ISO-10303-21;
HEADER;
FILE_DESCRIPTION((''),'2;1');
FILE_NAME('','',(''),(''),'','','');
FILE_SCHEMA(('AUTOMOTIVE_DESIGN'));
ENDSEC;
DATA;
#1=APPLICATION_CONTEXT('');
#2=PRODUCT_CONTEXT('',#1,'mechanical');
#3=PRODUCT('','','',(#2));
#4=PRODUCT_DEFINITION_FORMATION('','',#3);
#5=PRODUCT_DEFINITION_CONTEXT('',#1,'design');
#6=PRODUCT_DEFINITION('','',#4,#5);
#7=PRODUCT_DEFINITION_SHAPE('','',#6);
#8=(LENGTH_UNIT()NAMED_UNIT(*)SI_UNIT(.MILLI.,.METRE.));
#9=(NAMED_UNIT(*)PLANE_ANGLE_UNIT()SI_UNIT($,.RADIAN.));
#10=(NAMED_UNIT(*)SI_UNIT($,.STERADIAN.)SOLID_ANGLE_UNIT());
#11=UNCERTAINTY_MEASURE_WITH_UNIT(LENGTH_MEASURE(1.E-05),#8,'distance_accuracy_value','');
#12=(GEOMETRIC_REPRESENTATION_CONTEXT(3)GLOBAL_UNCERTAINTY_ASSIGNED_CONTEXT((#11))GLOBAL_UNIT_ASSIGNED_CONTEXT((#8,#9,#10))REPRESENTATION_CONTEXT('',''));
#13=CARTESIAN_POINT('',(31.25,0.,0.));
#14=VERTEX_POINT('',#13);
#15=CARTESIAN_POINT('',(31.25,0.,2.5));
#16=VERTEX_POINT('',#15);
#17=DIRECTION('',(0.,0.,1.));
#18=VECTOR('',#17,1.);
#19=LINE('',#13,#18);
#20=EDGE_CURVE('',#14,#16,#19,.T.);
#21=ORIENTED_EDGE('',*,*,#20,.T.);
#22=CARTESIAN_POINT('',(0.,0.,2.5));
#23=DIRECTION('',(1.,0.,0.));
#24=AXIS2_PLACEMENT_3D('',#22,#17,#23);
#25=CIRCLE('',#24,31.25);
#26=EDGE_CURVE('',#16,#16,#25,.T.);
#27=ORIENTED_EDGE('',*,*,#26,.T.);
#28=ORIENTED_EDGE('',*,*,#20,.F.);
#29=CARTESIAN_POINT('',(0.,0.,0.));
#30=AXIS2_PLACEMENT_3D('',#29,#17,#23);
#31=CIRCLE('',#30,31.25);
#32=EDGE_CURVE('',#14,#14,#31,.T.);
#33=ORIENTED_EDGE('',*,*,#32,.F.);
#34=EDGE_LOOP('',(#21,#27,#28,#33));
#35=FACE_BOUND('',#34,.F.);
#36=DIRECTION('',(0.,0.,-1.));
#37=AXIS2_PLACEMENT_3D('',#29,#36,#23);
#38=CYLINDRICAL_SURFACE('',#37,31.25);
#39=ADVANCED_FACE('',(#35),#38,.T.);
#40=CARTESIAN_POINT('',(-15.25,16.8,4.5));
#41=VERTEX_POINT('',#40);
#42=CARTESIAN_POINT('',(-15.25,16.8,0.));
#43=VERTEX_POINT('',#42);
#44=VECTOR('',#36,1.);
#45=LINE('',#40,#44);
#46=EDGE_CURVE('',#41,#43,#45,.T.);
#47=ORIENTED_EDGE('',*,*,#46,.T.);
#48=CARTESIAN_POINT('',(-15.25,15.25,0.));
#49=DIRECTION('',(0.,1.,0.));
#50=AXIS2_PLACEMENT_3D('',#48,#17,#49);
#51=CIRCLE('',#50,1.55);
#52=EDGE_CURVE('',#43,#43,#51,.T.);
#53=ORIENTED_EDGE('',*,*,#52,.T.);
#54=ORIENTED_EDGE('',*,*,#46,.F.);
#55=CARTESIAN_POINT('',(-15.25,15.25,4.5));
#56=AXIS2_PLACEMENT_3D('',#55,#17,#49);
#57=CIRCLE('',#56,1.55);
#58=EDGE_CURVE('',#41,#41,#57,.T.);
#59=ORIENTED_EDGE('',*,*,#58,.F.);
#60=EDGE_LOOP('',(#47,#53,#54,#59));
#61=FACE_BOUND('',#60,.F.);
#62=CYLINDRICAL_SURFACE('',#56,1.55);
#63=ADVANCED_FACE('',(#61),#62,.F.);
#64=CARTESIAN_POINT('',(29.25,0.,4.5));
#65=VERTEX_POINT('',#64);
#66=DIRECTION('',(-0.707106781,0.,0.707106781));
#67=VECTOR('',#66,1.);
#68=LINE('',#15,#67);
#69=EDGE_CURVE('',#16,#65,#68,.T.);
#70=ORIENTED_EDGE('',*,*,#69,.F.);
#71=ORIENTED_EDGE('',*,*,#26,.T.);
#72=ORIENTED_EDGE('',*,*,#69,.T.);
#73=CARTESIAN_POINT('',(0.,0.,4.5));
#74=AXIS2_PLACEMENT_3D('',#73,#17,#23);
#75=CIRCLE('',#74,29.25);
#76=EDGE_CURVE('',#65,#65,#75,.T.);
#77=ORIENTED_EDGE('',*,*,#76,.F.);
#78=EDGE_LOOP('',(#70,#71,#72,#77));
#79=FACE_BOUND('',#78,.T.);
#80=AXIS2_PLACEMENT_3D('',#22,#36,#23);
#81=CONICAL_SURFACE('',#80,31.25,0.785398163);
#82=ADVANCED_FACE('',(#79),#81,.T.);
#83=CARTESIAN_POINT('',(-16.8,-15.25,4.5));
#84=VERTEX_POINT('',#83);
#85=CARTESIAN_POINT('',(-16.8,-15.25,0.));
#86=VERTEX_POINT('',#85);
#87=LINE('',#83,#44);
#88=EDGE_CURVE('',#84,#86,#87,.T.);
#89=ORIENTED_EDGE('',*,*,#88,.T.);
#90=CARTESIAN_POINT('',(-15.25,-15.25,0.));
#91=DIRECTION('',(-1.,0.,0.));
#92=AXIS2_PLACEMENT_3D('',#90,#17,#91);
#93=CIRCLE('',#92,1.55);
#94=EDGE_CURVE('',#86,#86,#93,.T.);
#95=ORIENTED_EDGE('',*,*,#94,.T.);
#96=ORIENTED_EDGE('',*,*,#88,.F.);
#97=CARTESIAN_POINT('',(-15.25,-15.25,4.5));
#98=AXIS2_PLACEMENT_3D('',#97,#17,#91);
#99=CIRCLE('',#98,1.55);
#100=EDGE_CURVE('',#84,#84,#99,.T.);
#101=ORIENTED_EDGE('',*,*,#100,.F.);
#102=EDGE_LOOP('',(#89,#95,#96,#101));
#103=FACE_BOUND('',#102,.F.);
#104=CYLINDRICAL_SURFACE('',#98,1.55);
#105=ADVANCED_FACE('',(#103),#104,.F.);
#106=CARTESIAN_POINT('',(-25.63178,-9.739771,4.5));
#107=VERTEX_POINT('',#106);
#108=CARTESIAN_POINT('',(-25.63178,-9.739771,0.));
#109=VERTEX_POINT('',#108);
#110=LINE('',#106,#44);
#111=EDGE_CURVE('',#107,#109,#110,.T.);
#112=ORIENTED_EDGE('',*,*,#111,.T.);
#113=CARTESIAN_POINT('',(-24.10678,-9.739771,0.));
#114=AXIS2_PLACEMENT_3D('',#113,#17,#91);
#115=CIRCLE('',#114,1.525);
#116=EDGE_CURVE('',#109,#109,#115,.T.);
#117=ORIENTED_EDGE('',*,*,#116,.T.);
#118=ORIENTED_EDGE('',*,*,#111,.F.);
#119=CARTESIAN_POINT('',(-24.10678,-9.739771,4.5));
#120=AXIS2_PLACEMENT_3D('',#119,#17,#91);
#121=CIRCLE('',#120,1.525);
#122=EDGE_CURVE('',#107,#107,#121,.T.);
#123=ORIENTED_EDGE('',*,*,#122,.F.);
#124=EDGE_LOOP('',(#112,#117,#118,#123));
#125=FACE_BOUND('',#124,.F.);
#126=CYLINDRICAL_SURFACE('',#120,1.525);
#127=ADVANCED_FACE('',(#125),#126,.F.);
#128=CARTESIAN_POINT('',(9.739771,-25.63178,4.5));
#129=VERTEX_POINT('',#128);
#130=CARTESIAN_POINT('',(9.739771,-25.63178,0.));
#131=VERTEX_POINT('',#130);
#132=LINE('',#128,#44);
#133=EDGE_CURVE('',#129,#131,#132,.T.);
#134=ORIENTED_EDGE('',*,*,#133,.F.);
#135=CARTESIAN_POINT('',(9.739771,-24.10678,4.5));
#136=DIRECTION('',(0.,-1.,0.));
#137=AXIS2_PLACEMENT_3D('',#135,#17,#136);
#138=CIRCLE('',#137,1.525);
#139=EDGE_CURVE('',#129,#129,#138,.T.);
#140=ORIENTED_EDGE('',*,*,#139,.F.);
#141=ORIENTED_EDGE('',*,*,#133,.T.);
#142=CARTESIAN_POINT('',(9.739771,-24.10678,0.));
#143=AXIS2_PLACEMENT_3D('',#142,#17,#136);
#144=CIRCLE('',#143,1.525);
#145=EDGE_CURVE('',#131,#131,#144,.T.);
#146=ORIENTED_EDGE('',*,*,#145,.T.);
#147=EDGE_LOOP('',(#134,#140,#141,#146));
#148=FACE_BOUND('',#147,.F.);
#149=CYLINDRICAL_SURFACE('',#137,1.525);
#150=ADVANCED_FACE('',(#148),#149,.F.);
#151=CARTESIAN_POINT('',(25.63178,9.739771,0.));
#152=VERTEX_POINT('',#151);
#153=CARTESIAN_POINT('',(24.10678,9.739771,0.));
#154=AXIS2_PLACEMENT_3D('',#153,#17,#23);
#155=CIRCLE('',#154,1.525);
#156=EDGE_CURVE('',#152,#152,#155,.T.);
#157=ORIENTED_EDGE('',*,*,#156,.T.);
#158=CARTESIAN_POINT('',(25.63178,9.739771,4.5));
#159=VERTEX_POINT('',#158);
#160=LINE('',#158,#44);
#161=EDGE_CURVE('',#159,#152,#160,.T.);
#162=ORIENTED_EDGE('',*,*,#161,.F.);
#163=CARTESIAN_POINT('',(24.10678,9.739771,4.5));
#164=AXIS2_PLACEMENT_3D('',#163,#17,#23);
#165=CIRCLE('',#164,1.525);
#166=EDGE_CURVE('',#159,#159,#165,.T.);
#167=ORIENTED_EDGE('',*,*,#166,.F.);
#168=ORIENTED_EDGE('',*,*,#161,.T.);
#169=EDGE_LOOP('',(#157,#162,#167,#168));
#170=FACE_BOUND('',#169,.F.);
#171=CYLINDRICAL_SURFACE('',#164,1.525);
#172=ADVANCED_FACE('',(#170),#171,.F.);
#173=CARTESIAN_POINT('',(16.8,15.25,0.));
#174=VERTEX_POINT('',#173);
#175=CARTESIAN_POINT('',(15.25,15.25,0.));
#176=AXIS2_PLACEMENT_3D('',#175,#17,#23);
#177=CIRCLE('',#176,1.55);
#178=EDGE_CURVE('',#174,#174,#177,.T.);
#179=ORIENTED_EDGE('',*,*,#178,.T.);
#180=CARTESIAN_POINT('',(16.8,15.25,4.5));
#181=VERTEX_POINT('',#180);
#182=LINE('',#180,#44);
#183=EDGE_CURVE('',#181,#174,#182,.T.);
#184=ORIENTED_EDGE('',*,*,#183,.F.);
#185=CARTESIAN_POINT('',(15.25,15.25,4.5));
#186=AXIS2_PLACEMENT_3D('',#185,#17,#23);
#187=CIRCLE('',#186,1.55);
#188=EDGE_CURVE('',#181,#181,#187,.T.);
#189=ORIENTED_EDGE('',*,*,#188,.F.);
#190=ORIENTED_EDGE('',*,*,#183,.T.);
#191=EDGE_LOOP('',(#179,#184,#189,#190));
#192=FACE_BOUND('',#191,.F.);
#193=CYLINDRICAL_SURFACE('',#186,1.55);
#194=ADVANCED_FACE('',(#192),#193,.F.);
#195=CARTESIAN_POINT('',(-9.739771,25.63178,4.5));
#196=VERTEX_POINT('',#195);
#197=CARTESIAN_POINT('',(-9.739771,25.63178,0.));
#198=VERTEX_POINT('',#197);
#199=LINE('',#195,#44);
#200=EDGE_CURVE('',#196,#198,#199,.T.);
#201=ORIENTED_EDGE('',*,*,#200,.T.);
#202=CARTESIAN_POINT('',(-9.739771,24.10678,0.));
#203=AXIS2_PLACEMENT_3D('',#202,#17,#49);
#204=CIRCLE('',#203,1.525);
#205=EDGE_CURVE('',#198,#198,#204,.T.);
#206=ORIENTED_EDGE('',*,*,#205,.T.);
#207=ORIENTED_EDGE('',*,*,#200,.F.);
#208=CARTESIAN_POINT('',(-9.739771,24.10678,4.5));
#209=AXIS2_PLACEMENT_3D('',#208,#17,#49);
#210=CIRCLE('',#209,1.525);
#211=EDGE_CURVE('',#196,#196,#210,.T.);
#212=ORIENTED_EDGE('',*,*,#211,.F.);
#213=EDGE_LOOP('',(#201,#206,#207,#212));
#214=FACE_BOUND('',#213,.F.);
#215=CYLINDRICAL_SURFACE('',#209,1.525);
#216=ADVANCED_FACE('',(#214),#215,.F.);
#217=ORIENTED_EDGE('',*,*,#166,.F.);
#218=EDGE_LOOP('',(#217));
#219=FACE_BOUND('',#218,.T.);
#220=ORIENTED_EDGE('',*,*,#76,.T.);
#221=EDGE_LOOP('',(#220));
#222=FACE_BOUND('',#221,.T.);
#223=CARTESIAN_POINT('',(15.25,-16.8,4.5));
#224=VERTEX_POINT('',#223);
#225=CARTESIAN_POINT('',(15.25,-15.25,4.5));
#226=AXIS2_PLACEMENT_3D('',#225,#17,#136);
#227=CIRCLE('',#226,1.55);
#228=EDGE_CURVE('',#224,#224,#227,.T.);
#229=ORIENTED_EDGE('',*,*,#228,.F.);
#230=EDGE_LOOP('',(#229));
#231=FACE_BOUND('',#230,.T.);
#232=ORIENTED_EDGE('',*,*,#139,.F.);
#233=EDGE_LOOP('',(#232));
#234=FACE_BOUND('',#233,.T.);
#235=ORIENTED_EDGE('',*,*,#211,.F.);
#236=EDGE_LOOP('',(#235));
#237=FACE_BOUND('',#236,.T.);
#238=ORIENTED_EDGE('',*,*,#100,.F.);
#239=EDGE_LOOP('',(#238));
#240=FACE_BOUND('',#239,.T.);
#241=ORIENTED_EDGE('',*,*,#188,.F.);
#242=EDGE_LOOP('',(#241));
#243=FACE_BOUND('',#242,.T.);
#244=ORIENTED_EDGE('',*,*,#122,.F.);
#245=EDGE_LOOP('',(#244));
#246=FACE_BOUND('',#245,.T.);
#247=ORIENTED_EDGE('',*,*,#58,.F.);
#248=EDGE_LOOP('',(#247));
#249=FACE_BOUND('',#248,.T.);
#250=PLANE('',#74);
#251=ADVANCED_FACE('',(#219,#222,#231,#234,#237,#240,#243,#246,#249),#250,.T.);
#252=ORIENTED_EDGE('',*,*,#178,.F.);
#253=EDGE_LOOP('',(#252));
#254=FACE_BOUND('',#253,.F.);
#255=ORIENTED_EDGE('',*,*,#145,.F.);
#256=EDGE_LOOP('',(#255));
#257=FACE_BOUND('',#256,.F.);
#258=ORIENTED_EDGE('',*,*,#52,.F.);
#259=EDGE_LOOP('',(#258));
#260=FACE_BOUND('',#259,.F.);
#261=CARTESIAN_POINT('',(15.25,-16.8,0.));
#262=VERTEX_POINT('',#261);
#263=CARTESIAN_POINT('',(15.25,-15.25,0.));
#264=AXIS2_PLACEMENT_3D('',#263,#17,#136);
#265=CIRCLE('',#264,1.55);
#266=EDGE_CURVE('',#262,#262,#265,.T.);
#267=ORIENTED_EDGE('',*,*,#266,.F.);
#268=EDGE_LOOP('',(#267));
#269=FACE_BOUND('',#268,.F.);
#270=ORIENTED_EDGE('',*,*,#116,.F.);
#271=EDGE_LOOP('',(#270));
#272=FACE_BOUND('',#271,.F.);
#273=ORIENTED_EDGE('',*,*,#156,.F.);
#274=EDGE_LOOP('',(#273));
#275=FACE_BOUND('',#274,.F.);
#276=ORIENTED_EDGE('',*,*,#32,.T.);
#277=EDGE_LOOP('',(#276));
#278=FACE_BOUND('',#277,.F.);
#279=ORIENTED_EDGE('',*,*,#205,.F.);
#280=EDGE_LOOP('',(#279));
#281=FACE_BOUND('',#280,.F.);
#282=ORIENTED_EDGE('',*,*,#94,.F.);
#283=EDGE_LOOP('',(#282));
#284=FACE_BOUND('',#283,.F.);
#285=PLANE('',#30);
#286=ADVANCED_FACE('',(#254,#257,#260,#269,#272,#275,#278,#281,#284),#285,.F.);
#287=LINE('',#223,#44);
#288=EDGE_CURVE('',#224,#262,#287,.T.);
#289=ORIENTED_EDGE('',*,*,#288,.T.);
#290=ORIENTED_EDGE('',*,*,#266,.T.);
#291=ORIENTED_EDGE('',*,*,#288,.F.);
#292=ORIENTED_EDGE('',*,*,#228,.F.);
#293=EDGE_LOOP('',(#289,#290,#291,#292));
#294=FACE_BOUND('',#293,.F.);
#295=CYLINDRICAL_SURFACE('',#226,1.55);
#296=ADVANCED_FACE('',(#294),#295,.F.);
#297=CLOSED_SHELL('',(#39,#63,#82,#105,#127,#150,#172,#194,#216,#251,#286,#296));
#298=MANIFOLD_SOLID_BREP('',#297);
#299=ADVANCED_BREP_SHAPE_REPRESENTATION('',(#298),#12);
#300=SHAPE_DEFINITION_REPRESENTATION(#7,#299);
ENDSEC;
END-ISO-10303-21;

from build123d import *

# Parameters (mm, degrees)
F0_R            = 31.25
F1_DEPTH        = 4.5
F2_R            = 1.525
F3_DEPTH        = 4.501
F3_COPIES_COUNT = 4
F4_SIZE         = 2
F5_R            = 1.55
F6_DEPTH        = 4.501
F6_COPIES_COUNT = 4


# Not quite as in the source:
# - a pattern or mirror of a feature is missing from the dataset's text; its kind, count and spacing are read off the source's solid


with BuildPart() as f1:
    # F0 (on Top) → F1 (new body)
    with BuildSketch(Plane.XY):
        Circle(F0_R)
    extrude(amount=F1_DEPTH)

    # F2 (on face) → F3 (cut, through all)
    with BuildSketch(Plane.XY.offset(4.5)):
        with Locations((24.1067802187, 9.7397714288)):
            Circle(F2_R)
    f3 = extrude(amount=-F3_DEPTH, mode=Mode.SUBTRACT)

    # F3_copies: F3 ×4 about axis
    f3_copies_axis = Axis((0, 0, 0), (0, 0, 1))
    for i in range(1, F3_COPIES_COUNT):
        add(f3.rotate(f3_copies_axis, i * 360 / F3_COPIES_COUNT), mode=Mode.SUBTRACT)

    # F4
    f4_edges = [f1.edges().sort_by_distance(p)[0] for p in [
        (-31.25, 0, 4.5),
    ]]
    chamfer(f4_edges, length=F4_SIZE)

    # F5 (on face) → F6 (cut, through all)
    with BuildSketch(Plane.XY.offset(4.5)):
        with Locations((15.25, 15.25)):
            Circle(F5_R)
    f6 = extrude(amount=-F6_DEPTH, mode=Mode.SUBTRACT)

    # F6_copies: F6 ×4 about axis
    f6_copies_axis = Axis((0, 0, 0), (0, 0, 1))
    for i in range(1, F6_COPIES_COUNT):
        add(f6.rotate(f6_copies_axis, i * 360 / F6_COPIES_COUNT), mode=Mode.SUBTRACT)


solid = f1.part
